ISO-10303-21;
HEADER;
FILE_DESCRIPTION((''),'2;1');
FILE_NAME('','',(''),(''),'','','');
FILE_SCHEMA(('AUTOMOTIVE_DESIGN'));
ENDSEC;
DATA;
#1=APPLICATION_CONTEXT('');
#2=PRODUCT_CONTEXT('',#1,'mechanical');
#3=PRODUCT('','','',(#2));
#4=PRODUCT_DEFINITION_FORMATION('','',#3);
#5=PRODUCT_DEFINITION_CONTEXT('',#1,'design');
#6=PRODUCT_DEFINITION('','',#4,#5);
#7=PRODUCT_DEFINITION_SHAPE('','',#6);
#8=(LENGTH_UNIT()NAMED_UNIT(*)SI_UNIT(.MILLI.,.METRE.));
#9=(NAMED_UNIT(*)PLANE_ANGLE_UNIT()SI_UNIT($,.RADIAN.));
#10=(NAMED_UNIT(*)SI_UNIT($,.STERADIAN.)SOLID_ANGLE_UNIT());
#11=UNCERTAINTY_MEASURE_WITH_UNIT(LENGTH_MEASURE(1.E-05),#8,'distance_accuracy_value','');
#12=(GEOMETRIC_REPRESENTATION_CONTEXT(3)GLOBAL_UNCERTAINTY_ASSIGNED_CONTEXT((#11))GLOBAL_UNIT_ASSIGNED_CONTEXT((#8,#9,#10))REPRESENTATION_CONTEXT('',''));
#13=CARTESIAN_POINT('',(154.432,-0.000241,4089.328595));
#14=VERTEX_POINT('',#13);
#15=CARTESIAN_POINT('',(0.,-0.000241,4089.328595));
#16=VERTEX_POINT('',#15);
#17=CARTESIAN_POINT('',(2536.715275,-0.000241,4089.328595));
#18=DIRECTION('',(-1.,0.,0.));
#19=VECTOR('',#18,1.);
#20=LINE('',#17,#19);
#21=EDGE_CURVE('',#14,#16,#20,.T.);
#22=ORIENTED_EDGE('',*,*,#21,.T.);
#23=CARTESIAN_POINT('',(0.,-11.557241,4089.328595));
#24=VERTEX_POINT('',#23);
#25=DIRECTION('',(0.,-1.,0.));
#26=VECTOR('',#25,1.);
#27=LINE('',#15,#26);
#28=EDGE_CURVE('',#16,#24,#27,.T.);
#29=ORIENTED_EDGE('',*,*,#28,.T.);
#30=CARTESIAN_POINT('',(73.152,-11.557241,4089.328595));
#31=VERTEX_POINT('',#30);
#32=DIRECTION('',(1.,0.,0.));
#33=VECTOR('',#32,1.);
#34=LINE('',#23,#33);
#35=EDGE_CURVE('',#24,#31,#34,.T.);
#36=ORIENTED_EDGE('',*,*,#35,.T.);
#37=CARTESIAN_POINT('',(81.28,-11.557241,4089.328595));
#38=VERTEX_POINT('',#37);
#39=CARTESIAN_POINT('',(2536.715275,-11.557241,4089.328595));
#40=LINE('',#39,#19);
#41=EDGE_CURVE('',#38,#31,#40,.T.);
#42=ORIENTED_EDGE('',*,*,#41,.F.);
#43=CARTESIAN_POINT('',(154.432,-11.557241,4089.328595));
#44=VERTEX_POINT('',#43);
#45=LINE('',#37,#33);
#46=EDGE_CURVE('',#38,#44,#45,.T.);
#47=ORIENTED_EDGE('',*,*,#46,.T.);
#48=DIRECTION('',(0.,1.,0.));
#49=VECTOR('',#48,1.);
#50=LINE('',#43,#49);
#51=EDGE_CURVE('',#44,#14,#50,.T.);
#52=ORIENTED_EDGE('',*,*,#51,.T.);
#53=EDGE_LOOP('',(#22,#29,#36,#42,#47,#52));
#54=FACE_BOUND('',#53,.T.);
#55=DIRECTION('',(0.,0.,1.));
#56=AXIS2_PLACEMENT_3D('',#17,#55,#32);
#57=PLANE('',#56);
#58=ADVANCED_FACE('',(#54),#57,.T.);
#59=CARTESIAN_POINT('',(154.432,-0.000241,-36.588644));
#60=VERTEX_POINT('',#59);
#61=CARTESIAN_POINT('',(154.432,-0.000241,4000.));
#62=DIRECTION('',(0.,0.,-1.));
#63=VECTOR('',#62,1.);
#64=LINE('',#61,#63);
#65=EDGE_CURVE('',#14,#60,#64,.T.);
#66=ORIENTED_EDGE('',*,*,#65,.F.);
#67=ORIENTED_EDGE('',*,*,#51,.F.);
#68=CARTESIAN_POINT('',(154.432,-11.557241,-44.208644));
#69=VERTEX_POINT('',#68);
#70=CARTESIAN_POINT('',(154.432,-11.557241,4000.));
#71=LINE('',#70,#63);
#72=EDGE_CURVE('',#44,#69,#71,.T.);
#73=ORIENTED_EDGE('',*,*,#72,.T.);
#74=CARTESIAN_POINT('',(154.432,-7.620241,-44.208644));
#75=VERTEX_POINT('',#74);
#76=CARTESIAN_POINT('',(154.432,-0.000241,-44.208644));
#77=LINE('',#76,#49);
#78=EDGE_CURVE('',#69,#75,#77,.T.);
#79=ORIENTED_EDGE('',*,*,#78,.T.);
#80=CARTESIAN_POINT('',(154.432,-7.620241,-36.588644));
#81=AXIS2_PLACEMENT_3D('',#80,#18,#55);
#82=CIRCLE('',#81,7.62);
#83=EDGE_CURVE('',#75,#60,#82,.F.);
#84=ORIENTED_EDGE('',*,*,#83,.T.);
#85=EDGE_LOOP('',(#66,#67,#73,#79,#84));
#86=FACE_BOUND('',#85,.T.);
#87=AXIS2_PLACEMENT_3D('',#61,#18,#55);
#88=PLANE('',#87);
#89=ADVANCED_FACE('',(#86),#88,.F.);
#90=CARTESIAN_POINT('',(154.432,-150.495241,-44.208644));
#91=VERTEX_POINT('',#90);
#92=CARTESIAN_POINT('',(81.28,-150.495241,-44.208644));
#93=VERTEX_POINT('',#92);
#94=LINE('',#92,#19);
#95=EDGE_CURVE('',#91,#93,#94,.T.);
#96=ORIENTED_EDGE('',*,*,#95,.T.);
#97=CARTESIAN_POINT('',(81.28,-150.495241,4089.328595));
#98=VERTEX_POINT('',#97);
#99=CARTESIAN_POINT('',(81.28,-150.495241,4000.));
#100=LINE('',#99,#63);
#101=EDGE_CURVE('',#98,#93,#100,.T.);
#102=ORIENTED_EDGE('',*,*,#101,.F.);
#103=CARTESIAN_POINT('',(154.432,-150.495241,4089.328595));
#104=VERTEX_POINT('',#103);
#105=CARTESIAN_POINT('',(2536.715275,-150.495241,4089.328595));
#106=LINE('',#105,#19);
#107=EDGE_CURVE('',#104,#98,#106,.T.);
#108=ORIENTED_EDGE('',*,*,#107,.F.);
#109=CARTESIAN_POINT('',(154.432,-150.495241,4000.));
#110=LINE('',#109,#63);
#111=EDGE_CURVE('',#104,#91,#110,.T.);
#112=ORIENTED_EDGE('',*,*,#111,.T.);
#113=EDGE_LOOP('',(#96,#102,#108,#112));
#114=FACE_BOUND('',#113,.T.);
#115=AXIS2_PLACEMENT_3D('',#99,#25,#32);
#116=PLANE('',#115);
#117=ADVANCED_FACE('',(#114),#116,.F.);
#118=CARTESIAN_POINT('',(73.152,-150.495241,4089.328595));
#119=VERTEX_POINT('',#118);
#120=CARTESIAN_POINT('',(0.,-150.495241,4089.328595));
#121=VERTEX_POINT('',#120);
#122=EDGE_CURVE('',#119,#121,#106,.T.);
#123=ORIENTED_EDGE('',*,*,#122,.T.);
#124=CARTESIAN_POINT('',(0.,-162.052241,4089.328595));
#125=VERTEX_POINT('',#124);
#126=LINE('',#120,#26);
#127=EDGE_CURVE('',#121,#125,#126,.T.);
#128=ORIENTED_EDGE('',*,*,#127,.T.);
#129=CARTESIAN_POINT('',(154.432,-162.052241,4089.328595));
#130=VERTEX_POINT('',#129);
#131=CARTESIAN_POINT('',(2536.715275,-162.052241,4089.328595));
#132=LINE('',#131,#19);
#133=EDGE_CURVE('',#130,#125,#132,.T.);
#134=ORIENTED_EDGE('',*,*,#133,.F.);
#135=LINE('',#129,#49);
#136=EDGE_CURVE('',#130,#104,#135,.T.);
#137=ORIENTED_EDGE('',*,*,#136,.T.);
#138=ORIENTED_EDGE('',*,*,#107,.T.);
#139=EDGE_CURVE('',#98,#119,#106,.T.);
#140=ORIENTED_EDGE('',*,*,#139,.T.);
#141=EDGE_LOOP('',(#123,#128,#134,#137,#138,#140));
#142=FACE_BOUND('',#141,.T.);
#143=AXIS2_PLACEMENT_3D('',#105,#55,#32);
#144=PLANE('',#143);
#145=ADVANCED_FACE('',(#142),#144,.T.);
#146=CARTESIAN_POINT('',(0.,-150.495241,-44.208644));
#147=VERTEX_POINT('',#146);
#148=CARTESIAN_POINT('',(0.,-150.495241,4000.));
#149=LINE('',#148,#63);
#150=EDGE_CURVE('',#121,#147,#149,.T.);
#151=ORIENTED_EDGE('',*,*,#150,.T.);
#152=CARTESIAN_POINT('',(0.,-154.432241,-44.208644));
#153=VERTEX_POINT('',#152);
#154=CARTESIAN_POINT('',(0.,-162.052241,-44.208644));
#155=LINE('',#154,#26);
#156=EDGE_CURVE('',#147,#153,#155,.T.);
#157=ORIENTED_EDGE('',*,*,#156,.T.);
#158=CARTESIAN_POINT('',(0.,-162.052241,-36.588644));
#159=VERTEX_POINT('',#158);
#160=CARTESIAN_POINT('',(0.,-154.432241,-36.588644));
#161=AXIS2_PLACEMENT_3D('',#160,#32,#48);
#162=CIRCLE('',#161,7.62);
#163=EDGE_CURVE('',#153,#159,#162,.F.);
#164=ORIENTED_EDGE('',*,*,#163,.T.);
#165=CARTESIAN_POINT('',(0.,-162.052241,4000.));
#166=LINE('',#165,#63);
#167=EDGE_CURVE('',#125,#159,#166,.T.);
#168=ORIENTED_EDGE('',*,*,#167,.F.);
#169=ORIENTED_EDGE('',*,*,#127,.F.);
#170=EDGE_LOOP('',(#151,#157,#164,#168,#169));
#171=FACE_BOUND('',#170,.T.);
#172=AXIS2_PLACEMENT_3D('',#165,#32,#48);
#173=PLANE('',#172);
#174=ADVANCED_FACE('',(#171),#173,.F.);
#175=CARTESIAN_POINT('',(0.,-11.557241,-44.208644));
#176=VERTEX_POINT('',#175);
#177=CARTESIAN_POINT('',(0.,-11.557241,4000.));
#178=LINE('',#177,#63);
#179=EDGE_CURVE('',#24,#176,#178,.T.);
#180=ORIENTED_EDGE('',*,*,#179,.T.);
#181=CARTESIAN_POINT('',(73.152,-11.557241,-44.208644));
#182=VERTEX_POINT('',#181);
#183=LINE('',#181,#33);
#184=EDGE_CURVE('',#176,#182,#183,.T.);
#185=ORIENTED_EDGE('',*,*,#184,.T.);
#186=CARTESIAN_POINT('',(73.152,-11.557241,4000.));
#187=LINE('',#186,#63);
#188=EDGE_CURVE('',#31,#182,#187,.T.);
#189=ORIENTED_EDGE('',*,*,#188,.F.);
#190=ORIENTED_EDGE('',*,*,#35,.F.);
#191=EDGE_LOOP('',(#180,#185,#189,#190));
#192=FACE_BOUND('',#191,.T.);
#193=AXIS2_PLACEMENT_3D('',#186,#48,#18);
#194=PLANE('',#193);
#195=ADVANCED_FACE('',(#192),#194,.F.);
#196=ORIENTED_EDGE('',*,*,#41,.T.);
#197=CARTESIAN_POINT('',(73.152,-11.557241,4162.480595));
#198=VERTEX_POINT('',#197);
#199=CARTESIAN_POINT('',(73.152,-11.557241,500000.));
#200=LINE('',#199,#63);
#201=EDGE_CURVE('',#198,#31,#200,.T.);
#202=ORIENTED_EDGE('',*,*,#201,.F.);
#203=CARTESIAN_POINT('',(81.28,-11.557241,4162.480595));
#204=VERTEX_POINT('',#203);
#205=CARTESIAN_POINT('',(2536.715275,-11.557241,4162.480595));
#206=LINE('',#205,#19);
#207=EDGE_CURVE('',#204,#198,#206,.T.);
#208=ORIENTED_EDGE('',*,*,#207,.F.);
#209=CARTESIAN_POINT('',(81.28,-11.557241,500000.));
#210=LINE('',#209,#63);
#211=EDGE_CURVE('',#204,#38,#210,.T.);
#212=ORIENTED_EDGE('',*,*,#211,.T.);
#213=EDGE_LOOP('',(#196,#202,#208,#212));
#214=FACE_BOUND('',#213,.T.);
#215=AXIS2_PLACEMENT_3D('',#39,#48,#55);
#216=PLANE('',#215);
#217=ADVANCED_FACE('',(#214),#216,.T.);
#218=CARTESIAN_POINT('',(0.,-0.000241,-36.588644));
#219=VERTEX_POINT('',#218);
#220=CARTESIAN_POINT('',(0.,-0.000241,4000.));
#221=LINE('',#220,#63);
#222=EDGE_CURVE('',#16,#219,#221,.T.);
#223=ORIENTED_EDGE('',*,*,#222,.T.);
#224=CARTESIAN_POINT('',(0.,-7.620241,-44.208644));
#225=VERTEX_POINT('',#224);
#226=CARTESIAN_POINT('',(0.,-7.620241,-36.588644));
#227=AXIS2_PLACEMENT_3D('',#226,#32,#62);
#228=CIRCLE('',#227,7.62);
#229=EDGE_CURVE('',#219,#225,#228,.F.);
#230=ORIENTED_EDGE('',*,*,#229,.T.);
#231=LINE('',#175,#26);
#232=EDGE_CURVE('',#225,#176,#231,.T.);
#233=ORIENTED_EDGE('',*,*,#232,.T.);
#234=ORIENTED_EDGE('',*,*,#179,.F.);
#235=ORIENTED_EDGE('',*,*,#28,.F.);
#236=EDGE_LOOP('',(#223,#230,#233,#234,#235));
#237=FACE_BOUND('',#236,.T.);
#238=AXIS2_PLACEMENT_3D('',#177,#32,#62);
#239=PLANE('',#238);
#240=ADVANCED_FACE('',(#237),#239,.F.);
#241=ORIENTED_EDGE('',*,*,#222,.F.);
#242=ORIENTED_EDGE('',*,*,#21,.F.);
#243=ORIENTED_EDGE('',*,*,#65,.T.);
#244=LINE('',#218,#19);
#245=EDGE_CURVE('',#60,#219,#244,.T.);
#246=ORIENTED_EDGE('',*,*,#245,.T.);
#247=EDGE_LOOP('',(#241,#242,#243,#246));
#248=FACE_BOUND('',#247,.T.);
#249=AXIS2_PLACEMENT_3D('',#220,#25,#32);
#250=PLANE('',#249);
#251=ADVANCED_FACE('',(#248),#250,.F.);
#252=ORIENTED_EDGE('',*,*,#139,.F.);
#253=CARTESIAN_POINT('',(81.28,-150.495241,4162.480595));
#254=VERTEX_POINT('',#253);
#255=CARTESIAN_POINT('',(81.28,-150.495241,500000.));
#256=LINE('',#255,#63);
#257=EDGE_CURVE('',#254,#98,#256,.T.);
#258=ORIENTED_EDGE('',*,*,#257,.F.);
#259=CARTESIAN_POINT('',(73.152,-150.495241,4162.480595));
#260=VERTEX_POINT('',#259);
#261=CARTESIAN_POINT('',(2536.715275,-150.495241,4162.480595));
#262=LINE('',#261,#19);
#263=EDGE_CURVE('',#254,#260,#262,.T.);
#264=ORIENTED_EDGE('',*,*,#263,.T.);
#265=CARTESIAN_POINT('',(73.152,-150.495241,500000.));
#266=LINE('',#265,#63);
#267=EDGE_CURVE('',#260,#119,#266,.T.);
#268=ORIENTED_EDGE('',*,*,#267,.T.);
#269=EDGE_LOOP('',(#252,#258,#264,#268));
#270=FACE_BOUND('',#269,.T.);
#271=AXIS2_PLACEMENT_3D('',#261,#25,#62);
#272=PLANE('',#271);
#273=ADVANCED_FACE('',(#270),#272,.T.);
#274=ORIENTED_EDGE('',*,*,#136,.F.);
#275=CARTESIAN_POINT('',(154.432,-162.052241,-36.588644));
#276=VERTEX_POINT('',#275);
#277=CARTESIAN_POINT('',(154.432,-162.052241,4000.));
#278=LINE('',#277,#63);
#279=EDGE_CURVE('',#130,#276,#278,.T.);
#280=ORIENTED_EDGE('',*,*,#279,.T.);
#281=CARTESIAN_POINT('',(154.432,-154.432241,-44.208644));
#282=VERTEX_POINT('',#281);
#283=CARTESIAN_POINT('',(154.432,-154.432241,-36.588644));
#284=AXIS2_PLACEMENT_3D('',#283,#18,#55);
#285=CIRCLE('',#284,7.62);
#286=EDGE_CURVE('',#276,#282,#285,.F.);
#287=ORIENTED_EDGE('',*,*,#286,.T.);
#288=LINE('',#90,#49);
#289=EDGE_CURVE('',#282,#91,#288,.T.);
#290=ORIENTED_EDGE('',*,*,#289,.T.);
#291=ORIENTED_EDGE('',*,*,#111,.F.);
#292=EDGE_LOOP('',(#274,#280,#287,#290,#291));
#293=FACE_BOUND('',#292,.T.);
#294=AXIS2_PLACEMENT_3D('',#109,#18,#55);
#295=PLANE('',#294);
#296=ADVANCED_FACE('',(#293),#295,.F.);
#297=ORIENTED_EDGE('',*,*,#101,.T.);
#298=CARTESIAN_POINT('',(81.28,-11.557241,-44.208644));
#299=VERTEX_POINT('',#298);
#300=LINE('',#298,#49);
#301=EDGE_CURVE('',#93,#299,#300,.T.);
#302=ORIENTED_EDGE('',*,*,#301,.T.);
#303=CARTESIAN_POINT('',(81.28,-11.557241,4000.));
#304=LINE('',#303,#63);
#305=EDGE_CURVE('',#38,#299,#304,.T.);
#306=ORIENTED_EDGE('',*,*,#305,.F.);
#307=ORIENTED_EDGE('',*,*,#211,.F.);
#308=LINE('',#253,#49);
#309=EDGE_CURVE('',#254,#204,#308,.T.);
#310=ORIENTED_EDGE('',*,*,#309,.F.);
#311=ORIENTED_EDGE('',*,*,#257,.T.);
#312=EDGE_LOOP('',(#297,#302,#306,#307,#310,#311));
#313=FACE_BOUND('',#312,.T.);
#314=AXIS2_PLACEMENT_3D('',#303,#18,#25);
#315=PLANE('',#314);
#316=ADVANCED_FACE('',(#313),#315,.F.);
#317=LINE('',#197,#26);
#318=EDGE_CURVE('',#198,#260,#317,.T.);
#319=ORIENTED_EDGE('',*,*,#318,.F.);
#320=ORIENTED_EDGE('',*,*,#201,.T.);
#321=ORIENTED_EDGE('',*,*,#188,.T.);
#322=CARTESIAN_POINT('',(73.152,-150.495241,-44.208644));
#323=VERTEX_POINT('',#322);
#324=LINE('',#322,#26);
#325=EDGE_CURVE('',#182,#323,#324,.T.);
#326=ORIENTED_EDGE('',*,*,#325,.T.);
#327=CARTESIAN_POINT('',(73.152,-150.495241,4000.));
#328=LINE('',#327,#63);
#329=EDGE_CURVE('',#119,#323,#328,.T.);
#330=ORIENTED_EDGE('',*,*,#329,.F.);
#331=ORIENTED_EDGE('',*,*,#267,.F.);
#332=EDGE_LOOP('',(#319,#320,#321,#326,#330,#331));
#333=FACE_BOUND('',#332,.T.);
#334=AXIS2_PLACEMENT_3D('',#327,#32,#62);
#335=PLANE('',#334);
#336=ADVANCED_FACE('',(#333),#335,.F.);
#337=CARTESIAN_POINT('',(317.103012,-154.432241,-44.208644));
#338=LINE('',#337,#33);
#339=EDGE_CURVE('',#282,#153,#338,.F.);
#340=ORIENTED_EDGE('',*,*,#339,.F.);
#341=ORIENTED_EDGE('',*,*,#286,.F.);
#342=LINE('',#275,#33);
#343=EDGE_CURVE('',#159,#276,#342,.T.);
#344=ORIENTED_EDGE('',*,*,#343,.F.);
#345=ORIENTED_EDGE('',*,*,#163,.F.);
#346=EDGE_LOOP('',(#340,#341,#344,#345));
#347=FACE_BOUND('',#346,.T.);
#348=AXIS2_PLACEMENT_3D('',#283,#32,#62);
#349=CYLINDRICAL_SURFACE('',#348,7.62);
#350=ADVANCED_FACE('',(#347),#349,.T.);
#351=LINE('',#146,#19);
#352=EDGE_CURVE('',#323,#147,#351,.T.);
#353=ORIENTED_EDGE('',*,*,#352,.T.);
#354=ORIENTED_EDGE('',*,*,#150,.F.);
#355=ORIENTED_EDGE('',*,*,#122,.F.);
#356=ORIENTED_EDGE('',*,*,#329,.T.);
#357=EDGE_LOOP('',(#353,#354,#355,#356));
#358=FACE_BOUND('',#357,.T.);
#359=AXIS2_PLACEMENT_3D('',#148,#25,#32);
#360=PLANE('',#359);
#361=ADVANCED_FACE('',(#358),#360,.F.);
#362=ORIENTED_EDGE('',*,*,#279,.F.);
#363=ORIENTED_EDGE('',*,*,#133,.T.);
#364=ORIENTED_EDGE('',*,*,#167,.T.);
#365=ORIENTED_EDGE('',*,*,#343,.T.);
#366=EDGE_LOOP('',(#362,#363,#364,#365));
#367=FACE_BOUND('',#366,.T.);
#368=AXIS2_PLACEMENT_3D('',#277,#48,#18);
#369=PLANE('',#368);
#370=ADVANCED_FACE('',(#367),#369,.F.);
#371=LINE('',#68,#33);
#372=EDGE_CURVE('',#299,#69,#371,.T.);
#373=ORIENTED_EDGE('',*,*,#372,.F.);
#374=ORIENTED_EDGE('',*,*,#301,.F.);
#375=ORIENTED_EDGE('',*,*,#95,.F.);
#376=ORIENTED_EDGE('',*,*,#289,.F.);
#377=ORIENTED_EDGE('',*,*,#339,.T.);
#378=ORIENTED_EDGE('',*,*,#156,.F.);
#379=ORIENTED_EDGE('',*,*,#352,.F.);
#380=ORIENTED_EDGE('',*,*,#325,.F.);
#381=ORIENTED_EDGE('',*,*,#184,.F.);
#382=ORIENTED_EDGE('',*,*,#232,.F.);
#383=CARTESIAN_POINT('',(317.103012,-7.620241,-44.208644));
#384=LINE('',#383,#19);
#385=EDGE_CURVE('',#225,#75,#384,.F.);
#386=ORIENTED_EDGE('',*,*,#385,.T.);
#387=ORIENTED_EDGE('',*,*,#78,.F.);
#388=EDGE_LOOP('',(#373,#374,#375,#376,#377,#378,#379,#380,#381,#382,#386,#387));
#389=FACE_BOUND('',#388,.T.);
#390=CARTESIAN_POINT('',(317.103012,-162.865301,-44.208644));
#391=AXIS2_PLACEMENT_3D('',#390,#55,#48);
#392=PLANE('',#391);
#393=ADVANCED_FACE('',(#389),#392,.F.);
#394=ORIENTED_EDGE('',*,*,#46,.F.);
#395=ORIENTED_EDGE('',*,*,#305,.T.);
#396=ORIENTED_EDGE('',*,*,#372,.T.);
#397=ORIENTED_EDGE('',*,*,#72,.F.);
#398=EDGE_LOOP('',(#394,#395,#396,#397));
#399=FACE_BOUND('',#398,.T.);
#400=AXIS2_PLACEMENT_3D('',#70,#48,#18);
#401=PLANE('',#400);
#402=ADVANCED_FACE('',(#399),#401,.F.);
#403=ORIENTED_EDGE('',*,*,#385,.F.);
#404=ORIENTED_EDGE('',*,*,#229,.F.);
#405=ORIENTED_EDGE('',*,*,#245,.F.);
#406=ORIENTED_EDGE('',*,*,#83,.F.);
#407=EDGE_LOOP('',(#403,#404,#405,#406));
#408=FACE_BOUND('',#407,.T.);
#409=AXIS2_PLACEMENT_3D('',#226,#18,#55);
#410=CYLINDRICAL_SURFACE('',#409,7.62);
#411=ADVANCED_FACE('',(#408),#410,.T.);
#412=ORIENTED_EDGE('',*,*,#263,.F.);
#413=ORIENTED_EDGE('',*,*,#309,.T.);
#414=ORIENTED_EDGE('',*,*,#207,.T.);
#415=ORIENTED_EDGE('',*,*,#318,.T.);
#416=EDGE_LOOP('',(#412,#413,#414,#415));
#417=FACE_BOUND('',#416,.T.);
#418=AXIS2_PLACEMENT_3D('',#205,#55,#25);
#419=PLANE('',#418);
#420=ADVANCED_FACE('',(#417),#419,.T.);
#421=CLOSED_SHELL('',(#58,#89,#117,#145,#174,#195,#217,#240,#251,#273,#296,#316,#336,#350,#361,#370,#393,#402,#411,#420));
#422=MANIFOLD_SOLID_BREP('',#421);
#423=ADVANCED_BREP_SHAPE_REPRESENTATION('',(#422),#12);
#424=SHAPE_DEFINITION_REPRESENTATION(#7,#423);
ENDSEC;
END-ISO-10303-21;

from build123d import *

# Parameters (mm, degrees)
BOSS_EXTRUDE1_DEPTH       = 4000
BOSS_EXTRUDE2_DEPTH       = 89.328594679
BOSS_EXTRUDE2_START       = 89.328594679
BOSS_EXTRUDE2_2_OUTLINE_W = 8.128
BOSS_EXTRUDE2_2_OUTLINE_H = 138.938
BOSS_EXTRUDE2_2_DEPTH     = 73.152
BOSS_EXTRUDE5_DEPTH       = 44.208643554
FILLET1_R                 = 7.62


# Read off the part's stored shape, not the designer's step: Boss-Extrude2
with BuildPart() as part:
    # Sketch1 → Boss-Extrude1 (new body)
    with BuildSketch(Plane.XY):
        Polygon((0, -0.000240533), (154.432, -0.000240533), (154.432, -11.557240533), (81.28, -11.557240533), (81.28, -150.495240533), (154.432, -150.495240533), (154.432, -162.052240533), (0, -162.052240533), (0, -150.495240533), (73.152, -150.495240533), (73.152, -11.557240533), (0, -11.557240533), align=None)
    extrude(amount=BOSS_EXTRUDE1_DEPTH)

    # Boss-Extrude2 outline → Boss-Extrude2 (add)
    with BuildSketch(Plane.XY.offset(4000)):
        Polygon((81.28, -150.495240533), (81.28, -11.557240533), (154.432, -11.557240533), (154.432, -0.000240533), (0, -0.000240533), (0, -11.557240533), (73.152, -11.557240533), (73.152, -150.495240533), (0, -150.495240533), (0, -162.052240533), (154.432, -162.052240533), (154.432, -150.495240533), align=None)
    extrude(amount=BOSS_EXTRUDE2_DEPTH)

    # Boss-Extrude2 2 outline → Boss-Extrude2 2 (add)
    with BuildSketch(Plane.XY.offset(4000).offset(BOSS_EXTRUDE2_START)):
        with Locations((77.216, -81.026240533)):
            Rectangle(BOSS_EXTRUDE2_2_OUTLINE_W, BOSS_EXTRUDE2_2_OUTLINE_H)
    extrude(amount=BOSS_EXTRUDE2_2_DEPTH)

    # Sketch4 → Boss-Extrude5 (add)
    with BuildSketch(Plane(origin=(0, 0, 0), x_dir=(-1, 0, 0), z_dir=(0, 0, -1))):
        Polygon((0, -11.557240533), (0, -0.000240533), (-154.432, -0.000240533), (-154.432, -11.557240533), (-81.28, -11.557240533), (-81.28, -150.495240533), (-154.432, -150.495240533), (-154.432, -162.052240533), (0, -162.052240533), (0, -150.495240533), (-73.152, -150.495240533), (-73.152, -11.557240533), align=None)
    extrude(amount=BOSS_EXTRUDE5_DEPTH)

    # Fillet1
    fillet1_edges = [part.edges().sort_by_distance(p)[0] for p in [
        (77.216, -162.052240533, -44.208643554),
        (77.216, -0.000240533, -44.208643554),
    ]]
    fillet(fillet1_edges, radius=FILLET1_R)


solid = part.part
